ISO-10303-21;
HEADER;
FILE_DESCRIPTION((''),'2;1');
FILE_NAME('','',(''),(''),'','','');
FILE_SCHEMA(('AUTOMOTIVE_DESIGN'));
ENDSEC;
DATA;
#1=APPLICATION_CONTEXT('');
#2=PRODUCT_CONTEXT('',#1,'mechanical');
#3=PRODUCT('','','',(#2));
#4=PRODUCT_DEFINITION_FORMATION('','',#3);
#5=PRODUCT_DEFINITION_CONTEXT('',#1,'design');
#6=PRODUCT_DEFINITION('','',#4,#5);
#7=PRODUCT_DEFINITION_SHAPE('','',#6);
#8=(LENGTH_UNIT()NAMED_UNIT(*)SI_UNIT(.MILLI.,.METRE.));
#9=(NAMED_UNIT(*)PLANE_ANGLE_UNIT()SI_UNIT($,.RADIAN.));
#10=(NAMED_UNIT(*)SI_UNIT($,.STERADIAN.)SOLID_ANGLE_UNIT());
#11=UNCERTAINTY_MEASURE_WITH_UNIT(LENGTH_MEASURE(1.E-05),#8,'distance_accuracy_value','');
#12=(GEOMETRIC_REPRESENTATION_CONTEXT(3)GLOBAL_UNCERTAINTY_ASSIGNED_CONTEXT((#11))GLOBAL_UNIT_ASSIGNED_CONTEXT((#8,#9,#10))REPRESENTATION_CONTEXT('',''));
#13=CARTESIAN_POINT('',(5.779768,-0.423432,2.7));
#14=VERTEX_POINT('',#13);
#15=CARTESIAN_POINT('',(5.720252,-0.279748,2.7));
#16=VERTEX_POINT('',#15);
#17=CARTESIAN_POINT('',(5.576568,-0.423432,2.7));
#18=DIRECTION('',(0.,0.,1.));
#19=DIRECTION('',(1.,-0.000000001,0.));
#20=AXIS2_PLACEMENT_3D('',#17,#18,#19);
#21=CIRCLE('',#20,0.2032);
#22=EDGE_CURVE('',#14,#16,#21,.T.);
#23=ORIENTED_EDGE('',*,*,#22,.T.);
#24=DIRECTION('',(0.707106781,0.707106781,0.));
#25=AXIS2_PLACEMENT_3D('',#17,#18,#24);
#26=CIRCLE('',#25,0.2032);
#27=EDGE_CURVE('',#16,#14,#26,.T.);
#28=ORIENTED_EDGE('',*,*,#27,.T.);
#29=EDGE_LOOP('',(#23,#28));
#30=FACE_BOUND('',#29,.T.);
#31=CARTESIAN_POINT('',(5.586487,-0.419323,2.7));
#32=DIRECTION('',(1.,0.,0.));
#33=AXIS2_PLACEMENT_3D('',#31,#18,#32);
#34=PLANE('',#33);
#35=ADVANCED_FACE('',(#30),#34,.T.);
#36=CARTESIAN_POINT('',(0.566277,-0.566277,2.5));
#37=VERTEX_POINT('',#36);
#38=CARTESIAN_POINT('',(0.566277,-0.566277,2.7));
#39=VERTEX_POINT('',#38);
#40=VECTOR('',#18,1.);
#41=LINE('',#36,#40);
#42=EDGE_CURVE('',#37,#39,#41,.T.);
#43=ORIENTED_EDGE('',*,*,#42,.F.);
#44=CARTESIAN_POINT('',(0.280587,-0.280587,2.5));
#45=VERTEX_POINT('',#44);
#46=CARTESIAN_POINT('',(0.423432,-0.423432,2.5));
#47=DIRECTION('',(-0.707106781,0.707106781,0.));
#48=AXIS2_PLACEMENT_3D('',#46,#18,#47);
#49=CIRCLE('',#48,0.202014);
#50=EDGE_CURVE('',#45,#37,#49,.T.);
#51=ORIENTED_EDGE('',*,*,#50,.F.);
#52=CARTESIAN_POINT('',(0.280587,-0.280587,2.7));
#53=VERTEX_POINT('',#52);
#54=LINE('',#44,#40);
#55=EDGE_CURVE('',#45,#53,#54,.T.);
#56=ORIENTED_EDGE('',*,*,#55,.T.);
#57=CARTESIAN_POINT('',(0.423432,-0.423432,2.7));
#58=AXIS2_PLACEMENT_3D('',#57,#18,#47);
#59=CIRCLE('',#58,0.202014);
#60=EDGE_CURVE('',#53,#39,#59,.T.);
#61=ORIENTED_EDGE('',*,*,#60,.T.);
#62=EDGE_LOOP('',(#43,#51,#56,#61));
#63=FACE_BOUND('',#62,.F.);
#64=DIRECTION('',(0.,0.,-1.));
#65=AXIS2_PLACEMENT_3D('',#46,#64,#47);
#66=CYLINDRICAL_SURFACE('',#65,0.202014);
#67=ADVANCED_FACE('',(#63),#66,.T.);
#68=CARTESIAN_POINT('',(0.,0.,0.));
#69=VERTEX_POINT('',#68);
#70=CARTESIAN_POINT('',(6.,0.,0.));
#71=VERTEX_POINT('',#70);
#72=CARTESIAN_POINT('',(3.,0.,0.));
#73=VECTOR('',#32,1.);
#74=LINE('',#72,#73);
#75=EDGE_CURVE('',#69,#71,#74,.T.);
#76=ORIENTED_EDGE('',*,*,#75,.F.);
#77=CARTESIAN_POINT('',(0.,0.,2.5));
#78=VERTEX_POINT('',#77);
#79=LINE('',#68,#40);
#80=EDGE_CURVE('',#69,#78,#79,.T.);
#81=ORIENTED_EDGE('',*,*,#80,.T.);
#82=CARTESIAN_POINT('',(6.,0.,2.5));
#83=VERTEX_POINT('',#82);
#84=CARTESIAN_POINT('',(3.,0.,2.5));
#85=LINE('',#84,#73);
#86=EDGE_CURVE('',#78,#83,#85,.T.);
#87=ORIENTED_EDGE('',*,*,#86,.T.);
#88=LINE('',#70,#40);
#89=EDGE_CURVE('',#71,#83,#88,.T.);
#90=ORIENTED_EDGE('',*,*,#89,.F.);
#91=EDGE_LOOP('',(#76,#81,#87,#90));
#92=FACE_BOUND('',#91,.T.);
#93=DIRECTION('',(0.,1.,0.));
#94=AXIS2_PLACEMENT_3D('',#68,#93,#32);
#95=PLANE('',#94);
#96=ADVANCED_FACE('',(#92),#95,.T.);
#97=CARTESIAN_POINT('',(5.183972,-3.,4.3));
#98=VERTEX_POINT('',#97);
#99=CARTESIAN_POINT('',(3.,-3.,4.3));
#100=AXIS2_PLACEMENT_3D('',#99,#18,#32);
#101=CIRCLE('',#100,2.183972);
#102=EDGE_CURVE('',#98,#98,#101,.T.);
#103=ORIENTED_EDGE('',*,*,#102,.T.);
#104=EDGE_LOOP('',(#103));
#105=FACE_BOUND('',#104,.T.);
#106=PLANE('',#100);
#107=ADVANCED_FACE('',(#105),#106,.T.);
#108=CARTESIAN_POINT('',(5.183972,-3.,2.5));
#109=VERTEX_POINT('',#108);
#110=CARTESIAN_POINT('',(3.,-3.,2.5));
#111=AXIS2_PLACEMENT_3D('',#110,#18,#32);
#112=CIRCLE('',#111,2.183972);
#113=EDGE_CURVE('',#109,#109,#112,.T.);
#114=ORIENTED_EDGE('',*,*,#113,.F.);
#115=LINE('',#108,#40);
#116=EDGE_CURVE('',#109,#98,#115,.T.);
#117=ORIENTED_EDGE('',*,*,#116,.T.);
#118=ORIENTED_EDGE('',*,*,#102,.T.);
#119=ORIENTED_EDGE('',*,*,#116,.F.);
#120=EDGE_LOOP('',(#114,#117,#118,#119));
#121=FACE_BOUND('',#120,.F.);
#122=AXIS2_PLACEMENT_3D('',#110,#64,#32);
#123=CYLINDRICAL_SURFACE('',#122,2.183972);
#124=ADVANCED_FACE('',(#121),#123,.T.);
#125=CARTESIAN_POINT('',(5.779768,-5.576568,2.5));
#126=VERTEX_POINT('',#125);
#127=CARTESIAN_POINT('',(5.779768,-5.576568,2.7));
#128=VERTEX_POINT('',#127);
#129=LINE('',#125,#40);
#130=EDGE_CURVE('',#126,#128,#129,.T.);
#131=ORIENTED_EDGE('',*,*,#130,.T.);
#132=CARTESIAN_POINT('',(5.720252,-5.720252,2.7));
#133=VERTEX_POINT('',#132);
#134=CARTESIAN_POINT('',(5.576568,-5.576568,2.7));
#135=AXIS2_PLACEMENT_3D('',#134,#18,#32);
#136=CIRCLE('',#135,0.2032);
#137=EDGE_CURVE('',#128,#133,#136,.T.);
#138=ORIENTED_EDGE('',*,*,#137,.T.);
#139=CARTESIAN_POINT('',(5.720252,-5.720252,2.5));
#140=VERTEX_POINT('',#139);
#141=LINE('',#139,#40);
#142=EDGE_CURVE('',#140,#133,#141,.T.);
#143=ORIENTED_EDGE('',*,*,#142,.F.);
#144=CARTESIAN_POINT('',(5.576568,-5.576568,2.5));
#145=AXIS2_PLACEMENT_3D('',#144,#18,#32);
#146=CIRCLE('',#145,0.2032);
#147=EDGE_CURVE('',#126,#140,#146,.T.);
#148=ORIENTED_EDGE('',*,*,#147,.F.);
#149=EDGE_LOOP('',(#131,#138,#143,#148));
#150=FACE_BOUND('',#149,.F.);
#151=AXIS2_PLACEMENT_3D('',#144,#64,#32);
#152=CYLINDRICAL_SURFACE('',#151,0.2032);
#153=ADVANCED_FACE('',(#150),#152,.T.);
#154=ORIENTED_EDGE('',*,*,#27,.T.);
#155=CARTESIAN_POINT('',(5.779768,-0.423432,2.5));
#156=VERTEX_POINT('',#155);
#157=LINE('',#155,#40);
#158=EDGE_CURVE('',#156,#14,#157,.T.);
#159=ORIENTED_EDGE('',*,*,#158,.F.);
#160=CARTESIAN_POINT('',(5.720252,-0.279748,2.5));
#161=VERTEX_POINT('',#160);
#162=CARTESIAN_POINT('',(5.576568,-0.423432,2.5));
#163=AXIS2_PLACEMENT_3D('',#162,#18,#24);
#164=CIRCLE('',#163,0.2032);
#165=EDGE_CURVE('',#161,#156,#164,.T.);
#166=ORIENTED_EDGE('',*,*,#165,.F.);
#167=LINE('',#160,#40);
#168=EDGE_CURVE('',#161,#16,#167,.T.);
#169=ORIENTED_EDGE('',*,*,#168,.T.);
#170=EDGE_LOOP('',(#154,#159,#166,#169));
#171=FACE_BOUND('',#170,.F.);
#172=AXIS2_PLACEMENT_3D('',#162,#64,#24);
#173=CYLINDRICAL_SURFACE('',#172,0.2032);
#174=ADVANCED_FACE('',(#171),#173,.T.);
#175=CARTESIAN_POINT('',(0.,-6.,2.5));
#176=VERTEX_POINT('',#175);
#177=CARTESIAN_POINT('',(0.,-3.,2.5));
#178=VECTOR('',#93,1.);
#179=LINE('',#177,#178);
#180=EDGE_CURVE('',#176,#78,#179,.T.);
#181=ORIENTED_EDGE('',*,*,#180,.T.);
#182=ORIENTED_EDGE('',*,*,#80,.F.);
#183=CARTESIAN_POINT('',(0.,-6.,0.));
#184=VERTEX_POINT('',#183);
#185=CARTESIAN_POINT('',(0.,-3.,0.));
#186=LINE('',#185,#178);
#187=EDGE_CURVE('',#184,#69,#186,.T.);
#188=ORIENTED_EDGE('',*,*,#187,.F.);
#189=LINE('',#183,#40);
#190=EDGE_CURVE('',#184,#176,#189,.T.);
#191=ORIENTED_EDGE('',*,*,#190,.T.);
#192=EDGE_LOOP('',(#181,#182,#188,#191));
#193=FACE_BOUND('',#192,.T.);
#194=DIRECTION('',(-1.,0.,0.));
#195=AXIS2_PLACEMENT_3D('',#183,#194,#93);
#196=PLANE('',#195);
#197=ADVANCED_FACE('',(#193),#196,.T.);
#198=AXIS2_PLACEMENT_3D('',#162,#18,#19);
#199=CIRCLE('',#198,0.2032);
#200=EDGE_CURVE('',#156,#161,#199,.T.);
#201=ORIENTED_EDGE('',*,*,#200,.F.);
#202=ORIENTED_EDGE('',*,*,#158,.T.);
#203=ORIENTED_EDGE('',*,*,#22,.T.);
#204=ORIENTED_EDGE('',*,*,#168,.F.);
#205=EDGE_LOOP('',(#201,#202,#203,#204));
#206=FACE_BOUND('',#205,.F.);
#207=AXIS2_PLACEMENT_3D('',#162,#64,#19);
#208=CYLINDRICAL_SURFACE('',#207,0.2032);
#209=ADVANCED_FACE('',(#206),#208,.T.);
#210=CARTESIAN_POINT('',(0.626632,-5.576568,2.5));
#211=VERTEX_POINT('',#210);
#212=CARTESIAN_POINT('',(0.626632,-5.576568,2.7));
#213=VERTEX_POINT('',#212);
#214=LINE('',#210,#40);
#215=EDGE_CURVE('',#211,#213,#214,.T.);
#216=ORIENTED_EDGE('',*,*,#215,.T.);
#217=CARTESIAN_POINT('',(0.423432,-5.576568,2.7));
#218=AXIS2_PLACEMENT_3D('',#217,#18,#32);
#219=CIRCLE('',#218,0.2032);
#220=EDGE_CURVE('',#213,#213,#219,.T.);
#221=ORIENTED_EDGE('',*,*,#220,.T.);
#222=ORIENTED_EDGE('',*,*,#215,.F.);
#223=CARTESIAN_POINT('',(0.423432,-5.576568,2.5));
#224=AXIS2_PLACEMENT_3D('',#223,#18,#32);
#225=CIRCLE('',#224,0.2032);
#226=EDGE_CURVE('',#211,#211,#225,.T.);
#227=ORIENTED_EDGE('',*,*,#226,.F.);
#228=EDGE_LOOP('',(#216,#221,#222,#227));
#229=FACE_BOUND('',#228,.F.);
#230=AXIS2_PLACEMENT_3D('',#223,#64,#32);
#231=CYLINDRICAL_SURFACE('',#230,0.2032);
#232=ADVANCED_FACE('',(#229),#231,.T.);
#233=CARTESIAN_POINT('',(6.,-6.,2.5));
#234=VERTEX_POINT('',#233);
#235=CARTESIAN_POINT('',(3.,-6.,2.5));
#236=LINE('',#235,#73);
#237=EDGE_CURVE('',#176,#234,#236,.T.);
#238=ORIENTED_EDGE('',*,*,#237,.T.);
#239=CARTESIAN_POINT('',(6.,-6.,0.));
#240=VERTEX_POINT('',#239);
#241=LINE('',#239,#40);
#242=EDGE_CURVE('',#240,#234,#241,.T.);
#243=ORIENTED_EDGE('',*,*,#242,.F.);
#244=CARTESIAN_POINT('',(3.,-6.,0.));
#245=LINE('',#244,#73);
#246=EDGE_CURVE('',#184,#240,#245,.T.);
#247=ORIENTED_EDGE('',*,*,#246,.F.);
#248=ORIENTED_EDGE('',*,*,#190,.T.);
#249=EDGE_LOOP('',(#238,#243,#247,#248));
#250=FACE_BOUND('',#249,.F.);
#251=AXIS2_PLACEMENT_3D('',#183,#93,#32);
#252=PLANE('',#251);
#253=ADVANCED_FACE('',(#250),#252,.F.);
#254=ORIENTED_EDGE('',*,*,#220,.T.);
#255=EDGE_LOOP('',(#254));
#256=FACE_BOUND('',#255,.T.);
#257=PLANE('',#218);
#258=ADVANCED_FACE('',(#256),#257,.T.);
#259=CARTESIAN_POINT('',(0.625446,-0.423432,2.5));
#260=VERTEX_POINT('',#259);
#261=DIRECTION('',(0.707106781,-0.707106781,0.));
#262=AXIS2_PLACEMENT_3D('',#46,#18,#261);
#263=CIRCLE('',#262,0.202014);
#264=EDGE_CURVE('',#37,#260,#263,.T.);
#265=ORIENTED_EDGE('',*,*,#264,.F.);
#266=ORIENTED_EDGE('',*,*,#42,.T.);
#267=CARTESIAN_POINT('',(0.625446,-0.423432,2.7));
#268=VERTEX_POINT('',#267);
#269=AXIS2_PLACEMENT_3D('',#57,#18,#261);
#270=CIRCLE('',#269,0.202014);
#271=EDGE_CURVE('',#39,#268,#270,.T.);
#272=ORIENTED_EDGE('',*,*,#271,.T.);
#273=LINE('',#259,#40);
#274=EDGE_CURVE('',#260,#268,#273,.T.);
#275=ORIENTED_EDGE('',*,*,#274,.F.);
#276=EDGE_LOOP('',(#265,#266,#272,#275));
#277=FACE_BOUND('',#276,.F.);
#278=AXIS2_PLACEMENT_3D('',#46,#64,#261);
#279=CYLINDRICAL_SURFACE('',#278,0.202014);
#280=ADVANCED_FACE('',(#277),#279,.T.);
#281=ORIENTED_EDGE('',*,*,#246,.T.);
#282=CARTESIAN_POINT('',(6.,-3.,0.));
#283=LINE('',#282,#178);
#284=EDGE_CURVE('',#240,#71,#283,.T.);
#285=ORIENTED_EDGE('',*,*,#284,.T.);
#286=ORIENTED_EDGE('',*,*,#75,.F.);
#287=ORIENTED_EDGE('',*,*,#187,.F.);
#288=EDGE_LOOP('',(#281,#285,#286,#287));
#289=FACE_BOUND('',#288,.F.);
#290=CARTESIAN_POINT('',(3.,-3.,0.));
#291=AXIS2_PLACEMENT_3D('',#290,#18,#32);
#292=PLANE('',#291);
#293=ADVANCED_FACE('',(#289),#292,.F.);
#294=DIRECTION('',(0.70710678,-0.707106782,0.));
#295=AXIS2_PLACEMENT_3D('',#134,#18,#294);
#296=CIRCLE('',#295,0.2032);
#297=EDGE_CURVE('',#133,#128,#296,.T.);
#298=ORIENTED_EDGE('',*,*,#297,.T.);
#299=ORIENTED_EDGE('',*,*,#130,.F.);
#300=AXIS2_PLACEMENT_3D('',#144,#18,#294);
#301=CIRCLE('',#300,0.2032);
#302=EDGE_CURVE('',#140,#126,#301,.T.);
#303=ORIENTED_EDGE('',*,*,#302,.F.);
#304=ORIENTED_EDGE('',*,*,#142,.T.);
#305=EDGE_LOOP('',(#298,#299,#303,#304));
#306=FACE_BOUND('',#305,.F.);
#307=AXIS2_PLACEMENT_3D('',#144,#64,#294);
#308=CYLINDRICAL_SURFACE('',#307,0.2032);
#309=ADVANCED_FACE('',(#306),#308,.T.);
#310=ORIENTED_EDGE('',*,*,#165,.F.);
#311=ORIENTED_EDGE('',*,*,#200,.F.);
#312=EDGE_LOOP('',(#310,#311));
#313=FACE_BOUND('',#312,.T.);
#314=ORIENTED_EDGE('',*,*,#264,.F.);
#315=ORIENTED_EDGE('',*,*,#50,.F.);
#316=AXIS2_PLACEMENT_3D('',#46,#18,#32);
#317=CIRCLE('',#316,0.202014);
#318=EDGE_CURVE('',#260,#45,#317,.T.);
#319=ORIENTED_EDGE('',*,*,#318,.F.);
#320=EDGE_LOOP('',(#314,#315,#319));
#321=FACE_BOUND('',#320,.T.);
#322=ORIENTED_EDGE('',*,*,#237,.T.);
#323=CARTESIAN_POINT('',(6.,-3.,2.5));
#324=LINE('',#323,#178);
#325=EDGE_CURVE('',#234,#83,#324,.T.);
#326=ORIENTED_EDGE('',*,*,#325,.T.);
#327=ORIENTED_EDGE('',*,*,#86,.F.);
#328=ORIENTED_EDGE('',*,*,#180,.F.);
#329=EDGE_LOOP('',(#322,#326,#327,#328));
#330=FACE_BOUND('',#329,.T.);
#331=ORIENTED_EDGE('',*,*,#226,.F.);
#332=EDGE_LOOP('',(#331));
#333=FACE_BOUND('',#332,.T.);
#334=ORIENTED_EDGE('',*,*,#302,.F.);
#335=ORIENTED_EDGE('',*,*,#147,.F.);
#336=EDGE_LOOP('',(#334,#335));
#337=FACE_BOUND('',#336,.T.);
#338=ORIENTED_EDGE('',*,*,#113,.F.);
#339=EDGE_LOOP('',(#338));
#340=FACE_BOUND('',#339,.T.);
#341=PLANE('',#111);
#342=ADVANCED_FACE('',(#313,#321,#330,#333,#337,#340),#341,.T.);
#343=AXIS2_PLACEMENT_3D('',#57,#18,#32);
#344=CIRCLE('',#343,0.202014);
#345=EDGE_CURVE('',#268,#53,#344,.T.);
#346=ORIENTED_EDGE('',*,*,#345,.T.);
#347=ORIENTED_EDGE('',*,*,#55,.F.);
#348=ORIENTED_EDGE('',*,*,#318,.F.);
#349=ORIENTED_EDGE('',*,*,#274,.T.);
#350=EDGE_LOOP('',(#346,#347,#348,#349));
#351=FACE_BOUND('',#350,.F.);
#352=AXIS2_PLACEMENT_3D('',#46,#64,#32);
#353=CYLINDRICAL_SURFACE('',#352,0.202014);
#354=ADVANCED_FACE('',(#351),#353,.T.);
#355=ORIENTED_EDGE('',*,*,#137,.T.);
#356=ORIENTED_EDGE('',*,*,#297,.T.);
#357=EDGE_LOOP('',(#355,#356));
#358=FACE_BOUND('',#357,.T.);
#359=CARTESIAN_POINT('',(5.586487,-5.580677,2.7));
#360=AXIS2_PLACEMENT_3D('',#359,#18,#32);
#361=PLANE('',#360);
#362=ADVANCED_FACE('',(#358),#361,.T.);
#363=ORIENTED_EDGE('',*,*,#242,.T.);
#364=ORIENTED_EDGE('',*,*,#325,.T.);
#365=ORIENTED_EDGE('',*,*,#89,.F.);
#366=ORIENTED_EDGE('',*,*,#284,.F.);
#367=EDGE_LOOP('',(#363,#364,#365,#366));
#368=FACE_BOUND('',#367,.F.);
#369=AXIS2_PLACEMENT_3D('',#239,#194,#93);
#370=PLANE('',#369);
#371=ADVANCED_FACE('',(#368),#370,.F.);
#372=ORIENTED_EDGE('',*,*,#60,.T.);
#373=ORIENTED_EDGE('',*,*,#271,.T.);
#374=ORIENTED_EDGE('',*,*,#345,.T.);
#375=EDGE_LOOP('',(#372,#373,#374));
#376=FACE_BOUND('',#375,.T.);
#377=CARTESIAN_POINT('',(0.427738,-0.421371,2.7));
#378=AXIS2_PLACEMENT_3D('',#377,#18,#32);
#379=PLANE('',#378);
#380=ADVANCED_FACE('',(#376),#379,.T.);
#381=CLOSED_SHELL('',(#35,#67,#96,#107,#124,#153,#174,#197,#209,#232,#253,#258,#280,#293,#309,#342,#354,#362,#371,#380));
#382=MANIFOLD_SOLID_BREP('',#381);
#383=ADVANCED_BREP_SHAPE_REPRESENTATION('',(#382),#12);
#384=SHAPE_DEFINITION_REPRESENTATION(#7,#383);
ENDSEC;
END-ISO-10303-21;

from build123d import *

# Parameters (mm, degrees)
F0_W     = 6
F0_H     = 6
F1_DEPTH = 2.5
F2_R     = 2.18397174
F3_DEPTH = 1.8
F2_R_2   = 0.2032
F4_DEPTH = 0.2


with BuildPart() as f1:
    # F0 (on Top) → F1 (new body)
    with BuildSketch(Plane.XY):
        with Locations((3, -3)):
            Rectangle(F0_W, F0_H)
    extrude(amount=F1_DEPTH)

    # F2 (on face) → F3 (join)
    with BuildSketch(Plane.XY.offset(2.5)):
        with Locations((3, -3)):
            Circle(F2_R)
    extrude(amount=F3_DEPTH)

    # F2 (on face) → F4 (join)
    with BuildSketch(Plane.XY.offset(2.5)):
        with BuildLine():
            ThreePointArc((0.6254458211, -0.4234319816), (0.5007393311, -0.23679553), (0.2805866258, -0.2805866258))
            ThreePointArc((0.2805866258, -0.2805866258), (0.2805866258, -0.5662773374), (0.5662773374, -0.5662773374))
            ThreePointArc((0.5662773374, -0.5662773374), (0.6100684332, -0.5007393311), (0.6254458211, -0.4234319816))
        make_face()
        with BuildLine():
            ThreePointArc((5.7797680184, -5.5765680184), (5.3888356974, -5.498806745), (5.7202521163, -5.7202521163))
            ThreePointArc((5.7202521163, -5.7202521163), (5.7643003394, -5.6543292919), (5.7797680184, -5.5765680184))
        make_face()
        with BuildLine():
            ThreePointArc((5.7797680184, -0.4234319816), (5.7643003394, -0.3456707081), (5.7202521163, -0.2797478837))
            ThreePointArc((5.7202521163, -0.2797478837), (5.3888356974, -0.501193255), (5.7797680184, -0.4234319816))
        make_face()
        with Locations((0.4234319816, -5.5765680184)):
            Circle(F2_R_2)
    extrude(amount=F4_DEPTH)


solid = f1.part
